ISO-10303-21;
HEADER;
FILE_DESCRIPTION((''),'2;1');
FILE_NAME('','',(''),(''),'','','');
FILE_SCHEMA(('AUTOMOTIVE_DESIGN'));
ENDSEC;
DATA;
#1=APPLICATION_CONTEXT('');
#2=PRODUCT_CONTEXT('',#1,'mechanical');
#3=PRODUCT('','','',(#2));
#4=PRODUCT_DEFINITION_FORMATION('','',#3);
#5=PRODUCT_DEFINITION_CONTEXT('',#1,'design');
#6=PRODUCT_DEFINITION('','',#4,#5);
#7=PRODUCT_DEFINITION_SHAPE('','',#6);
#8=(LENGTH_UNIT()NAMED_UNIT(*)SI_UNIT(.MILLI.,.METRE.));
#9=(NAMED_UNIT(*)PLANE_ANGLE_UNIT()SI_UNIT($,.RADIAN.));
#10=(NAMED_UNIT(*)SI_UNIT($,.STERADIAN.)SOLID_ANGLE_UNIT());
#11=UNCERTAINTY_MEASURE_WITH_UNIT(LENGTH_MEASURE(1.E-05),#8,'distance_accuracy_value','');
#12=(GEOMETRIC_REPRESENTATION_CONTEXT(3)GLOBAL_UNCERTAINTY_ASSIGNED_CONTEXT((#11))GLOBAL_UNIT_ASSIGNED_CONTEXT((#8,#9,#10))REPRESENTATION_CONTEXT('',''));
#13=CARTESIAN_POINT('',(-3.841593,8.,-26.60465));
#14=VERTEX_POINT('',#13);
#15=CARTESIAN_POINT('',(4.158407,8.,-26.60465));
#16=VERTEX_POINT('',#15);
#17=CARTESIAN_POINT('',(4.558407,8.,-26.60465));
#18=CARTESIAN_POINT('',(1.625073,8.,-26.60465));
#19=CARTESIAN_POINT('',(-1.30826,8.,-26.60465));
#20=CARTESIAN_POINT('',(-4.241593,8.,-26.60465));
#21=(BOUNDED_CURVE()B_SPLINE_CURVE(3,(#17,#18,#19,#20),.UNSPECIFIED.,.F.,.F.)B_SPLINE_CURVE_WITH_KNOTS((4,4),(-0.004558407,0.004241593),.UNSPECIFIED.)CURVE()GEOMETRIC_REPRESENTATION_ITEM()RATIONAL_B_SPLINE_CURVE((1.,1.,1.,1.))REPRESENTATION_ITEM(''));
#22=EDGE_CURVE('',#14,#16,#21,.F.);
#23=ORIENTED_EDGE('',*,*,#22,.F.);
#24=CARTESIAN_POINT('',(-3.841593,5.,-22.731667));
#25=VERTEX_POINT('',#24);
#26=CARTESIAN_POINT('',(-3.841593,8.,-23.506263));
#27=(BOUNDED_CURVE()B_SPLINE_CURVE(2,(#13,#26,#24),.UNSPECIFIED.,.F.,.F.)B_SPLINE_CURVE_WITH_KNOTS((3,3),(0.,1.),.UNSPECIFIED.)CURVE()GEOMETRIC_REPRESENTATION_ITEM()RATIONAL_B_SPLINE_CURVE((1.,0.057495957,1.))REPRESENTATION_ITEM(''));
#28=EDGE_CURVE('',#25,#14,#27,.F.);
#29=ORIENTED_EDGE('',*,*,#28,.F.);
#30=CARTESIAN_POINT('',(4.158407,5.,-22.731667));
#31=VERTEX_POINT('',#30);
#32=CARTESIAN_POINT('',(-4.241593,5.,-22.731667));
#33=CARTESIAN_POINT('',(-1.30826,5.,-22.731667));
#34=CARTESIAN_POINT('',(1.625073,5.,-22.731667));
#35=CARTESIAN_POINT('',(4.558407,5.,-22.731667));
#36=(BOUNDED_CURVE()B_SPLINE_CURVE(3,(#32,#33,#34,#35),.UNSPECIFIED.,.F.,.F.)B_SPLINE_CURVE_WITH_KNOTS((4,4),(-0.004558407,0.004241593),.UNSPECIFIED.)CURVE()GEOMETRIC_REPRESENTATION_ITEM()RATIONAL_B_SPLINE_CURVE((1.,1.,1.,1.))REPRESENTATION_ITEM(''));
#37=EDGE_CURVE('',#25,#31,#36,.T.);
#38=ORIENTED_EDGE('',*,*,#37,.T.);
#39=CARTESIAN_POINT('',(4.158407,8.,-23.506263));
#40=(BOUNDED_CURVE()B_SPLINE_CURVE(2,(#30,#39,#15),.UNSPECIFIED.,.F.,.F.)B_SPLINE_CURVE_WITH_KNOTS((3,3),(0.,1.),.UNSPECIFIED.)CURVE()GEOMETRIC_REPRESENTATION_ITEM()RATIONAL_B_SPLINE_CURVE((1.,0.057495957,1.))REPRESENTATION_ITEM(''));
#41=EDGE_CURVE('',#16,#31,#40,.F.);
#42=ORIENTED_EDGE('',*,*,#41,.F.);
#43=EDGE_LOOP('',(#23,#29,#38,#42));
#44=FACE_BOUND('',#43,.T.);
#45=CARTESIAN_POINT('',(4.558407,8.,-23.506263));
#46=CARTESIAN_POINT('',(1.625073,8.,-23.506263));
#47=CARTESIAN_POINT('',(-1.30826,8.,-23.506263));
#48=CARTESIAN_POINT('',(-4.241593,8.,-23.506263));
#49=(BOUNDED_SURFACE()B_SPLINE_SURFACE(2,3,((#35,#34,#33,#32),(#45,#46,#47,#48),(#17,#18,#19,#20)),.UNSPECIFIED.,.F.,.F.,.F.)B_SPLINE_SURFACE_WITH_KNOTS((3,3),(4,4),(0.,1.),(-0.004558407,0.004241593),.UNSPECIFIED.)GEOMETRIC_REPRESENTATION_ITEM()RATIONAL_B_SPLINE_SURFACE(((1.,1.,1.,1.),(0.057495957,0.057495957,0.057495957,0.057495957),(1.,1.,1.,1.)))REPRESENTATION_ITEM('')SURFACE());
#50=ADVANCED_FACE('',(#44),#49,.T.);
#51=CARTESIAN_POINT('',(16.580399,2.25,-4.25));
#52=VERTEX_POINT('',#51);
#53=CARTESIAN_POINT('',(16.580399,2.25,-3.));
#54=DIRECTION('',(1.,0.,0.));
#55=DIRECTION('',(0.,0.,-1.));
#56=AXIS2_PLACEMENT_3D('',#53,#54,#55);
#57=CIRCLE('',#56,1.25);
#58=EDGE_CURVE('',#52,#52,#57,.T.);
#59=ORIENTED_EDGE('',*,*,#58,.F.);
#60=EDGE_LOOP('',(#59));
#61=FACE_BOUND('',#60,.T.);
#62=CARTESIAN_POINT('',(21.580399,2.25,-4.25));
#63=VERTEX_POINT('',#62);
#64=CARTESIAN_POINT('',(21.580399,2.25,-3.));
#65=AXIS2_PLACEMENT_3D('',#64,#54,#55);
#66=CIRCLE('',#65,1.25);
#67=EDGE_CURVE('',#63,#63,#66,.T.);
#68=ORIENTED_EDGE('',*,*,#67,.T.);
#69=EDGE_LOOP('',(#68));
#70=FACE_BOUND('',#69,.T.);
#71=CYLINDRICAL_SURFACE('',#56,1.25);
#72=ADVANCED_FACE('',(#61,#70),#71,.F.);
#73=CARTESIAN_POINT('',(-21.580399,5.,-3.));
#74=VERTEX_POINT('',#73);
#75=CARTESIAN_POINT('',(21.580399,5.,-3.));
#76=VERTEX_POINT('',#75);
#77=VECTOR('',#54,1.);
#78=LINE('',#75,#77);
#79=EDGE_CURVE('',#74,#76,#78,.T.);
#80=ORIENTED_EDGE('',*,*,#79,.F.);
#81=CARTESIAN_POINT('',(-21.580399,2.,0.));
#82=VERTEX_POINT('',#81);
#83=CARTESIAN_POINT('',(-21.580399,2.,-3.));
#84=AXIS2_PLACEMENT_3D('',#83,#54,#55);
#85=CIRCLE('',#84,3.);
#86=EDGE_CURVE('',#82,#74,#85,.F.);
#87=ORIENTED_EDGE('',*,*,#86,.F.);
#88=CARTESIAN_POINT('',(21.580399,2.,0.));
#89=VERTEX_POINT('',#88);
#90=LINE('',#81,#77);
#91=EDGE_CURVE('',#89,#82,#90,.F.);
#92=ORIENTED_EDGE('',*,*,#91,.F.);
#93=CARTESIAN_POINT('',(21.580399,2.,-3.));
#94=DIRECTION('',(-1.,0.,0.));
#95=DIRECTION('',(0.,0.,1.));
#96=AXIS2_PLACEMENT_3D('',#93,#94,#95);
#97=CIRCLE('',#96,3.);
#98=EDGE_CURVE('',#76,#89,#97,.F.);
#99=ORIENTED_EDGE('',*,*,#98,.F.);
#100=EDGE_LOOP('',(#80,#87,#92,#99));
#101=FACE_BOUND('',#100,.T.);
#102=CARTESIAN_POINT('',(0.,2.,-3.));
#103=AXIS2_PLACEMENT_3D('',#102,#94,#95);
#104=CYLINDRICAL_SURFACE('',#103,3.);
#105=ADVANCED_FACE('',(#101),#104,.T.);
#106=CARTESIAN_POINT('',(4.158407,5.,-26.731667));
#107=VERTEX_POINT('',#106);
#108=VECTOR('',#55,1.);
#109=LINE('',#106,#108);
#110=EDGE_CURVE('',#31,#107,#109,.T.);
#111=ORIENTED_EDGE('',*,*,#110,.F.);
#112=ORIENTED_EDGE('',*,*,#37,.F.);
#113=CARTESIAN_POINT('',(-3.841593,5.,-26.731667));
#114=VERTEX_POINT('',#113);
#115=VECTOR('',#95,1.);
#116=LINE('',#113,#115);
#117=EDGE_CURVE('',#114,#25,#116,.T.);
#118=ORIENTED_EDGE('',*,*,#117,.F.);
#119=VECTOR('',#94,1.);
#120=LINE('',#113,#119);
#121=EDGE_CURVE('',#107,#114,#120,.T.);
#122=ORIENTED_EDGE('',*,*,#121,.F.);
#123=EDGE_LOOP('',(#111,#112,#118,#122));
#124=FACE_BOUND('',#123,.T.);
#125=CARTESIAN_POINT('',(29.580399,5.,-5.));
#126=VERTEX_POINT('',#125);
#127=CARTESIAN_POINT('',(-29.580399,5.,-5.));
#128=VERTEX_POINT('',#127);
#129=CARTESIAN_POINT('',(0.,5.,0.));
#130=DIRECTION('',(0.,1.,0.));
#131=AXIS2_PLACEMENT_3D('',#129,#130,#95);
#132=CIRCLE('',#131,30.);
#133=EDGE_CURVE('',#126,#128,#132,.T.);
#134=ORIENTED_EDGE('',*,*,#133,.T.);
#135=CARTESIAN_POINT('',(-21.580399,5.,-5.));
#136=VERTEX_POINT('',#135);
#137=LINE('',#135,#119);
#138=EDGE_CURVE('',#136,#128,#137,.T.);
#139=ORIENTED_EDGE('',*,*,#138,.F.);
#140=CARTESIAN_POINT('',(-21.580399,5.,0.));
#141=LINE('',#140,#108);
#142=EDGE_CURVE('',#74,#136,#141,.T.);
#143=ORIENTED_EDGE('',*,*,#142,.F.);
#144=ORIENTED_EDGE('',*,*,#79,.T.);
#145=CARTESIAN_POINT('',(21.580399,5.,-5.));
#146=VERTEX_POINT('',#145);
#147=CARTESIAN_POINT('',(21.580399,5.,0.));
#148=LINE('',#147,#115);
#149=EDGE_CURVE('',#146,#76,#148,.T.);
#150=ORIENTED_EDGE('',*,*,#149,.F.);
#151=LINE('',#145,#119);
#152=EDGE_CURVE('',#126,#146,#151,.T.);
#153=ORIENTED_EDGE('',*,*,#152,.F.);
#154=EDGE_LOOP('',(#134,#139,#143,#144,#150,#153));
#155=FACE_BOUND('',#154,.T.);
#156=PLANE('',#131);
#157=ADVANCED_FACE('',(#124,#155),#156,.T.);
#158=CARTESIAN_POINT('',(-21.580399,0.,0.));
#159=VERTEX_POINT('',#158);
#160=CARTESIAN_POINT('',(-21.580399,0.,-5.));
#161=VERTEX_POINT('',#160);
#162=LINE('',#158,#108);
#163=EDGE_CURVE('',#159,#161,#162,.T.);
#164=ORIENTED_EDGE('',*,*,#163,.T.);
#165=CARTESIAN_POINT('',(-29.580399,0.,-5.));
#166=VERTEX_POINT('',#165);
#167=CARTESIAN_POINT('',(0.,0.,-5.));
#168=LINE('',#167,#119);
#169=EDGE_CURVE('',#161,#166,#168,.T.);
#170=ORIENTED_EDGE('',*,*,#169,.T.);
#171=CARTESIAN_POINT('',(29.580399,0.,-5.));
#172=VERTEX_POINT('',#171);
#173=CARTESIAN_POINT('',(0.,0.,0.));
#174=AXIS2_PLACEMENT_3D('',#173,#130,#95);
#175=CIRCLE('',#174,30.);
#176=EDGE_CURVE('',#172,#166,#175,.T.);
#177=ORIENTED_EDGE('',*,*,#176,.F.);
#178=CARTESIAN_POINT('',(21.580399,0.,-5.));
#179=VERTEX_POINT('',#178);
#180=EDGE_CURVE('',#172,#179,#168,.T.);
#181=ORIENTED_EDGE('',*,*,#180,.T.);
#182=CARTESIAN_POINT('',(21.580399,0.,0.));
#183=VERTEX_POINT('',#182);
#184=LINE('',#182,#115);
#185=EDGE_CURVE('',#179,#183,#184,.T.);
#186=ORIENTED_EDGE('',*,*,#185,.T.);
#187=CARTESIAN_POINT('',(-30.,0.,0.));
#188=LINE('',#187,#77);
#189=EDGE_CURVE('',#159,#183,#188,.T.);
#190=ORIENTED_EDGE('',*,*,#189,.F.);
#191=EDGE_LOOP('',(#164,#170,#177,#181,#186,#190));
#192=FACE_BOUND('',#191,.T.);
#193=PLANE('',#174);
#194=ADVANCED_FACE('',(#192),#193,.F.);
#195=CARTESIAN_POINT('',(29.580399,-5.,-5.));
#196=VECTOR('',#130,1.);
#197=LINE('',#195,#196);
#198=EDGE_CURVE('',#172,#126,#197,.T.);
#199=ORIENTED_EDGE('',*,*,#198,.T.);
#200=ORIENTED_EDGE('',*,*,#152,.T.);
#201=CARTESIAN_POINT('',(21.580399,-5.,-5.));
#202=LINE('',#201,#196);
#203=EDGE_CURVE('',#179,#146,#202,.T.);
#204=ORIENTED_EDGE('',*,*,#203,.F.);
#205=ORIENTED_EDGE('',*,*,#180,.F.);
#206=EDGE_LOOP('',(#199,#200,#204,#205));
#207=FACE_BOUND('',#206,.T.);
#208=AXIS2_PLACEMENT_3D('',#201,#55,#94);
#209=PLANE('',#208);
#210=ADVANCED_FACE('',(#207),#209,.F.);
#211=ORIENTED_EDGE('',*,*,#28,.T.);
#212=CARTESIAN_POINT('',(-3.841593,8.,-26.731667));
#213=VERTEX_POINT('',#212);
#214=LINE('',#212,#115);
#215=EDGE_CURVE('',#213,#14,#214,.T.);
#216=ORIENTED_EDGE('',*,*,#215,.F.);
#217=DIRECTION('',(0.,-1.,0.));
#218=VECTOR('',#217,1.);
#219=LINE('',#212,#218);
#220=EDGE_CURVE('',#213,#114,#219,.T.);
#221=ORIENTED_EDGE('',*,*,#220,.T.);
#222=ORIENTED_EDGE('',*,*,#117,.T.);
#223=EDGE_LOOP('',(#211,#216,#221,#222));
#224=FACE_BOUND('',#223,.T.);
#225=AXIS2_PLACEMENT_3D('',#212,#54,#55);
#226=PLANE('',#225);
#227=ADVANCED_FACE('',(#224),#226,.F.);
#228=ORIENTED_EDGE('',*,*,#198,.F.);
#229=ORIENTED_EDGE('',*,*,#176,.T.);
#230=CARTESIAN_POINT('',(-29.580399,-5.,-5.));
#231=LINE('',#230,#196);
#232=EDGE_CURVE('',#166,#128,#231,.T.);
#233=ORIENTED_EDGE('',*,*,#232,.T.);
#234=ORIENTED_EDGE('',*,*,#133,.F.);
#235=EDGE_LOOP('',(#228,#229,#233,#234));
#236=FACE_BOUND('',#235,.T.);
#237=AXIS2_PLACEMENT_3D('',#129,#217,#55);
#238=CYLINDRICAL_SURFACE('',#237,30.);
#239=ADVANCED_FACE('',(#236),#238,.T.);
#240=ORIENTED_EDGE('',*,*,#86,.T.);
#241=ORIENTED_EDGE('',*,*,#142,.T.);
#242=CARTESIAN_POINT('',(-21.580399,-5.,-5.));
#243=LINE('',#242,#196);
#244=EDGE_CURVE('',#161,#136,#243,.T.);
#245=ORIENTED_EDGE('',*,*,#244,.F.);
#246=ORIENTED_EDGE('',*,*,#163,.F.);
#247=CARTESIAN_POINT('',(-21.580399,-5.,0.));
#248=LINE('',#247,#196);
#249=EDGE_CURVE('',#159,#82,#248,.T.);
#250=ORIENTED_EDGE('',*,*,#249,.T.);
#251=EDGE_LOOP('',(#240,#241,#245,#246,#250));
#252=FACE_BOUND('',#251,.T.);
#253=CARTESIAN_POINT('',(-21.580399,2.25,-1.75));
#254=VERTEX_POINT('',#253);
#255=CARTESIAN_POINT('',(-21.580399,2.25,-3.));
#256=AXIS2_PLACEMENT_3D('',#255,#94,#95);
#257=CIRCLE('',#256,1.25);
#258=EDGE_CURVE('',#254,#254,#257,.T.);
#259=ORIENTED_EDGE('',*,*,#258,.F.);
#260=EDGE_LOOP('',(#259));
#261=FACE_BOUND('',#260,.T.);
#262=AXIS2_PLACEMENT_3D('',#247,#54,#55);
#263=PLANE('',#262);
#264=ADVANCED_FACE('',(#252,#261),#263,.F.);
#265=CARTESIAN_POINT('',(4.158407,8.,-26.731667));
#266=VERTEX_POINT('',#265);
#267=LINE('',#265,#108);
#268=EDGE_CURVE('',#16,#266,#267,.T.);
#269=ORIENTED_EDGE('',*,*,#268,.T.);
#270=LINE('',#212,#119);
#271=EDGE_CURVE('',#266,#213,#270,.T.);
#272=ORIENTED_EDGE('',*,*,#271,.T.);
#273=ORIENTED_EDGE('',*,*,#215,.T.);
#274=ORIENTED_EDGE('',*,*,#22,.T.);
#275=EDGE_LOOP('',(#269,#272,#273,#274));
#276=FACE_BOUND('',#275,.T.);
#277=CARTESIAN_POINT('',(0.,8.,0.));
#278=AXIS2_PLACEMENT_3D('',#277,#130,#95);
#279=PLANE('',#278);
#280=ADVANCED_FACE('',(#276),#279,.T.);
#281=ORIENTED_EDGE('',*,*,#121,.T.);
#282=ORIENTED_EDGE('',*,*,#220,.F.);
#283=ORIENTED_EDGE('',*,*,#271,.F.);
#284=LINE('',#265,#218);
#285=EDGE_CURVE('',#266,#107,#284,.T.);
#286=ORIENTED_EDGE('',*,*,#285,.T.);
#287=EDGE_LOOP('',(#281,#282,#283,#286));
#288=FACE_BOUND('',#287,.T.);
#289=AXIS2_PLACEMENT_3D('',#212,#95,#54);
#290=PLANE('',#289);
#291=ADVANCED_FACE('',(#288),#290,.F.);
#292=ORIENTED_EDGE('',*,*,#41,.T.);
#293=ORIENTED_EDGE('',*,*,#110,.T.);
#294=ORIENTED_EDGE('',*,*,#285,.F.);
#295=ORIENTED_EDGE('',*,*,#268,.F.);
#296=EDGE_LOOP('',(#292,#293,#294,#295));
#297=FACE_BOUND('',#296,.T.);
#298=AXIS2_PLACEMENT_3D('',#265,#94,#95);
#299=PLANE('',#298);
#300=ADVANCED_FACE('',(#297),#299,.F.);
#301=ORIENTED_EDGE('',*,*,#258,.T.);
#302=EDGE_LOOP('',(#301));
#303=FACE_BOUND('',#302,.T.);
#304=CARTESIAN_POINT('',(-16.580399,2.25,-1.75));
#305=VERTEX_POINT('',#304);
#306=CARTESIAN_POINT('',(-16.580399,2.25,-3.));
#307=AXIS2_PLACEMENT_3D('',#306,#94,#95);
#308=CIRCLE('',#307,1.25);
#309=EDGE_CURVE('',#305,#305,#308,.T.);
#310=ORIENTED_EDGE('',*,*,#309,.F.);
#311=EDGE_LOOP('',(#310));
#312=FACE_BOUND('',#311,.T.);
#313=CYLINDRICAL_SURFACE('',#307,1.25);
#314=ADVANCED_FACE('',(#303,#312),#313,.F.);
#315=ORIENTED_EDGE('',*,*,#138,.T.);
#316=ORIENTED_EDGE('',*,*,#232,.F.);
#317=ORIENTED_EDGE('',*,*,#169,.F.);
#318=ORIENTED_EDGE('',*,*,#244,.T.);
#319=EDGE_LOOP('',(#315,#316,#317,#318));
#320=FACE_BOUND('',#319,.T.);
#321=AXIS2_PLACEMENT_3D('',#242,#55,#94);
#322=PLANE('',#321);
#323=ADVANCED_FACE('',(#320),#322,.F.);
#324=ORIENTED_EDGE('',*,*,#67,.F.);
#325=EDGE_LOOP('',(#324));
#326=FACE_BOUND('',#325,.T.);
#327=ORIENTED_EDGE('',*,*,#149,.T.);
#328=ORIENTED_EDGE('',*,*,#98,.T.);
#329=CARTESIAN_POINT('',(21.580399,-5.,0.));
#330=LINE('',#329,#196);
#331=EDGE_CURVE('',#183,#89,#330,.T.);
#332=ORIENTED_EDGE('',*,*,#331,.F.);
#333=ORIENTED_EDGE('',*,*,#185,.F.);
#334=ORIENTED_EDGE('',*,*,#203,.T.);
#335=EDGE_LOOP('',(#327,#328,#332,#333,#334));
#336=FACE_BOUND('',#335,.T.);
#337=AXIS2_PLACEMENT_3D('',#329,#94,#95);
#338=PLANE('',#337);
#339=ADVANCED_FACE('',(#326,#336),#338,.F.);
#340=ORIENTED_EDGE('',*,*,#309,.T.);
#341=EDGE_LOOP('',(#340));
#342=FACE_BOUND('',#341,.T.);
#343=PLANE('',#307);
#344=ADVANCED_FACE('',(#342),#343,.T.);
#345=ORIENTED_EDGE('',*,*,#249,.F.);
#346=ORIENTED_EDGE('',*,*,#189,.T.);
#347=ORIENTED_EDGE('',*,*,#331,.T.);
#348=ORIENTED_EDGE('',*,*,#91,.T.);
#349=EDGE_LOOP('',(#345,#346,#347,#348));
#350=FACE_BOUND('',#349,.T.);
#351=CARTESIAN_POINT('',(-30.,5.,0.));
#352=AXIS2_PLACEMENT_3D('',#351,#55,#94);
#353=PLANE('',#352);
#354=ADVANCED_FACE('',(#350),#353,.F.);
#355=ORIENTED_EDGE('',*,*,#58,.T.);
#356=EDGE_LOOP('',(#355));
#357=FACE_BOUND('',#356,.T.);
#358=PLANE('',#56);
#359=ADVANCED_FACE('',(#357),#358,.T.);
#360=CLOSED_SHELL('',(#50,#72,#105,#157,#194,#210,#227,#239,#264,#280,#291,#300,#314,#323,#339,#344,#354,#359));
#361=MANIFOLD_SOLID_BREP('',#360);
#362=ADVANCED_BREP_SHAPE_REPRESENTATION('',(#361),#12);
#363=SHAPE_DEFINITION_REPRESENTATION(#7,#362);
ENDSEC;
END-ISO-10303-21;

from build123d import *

# Parameters (mm, degrees)
BOSS_EXTRUDE1_DEPTH = 5
SKETCH3_W           = 8
SKETCH3_H           = 4
BOSS_EXTRUDE2_DEPTH = 3
FILLET1_START       = -3.841593316
FILLET1_DEPTH       = 8
CUT_EXTRUDE1_START  = -10
CUT_EXTRUDE1_DEPTH  = 10
FILLET2_R           = 3
SKETCH6_R           = 1.25
CUT_EXTRUDE2_DEPTH  = 5
CUT_EXTRUDE3_START  = -5
SKETCH7_R           = 1.25
CUT_EXTRUDE3_DEPTH  = 5


with BuildPart() as part:
    # Sketch1 → Boss-Extrude1 (new body)
    with BuildSketch(Plane(origin=(0, 0, 0), x_dir=(1, 0, 0), z_dir=(0, 1, 0))):
        with BuildLine():
            Line((-30, 0), (30, 0))
            ThreePointArc((30, 0), (0, 30), (-30, 0))
        make_face()
    extrude(amount=BOSS_EXTRUDE1_DEPTH)

    # Sketch3 → Boss-Extrude2 (add)
    with BuildSketch(Plane(origin=(0, 5, 0), x_dir=(1, 0, 0), z_dir=(0, 1, 0))):
        with Locations((0.158406684, 24.731666579)):
            Rectangle(SKETCH3_W, SKETCH3_H)
    extrude(amount=BOSS_EXTRUDE2_DEPTH)

    # Fillet1: read off the stored shape, not the designer's step
    # Fillet1 outline → Fillet1 (cut)
    with BuildSketch(Plane.YZ.offset(FILLET1_START)):
        with BuildLine():
            Line((8, -22.731666579), (5, -22.731666579))
            add(Edge.make_bspline(
                [(5, -22.731666579), (8, -23.506263249), (8, -26.604649926)],
                knots=[0, 0, 0, 1, 1, 1], degree=2, weights=[1, 0.057495957, 1]))
            Line((8, -26.604649926), (8, -22.731666579))
        make_face()
    extrude(amount=FILLET1_DEPTH, mode=Mode.SUBTRACT)

    # Sketch5 → Cut-Extrude1 (cut)
    with BuildSketch(Plane(origin=(0, 5, 0), x_dir=(1, 0, 0), z_dir=(0, 1, 0)).offset(CUT_EXTRUDE1_START)):
        with BuildLine():
            Line((-21.580398915, 0), (-21.580398915, 5))
            Line((-21.580398915, 5), (-29.580398915, 5))
            ThreePointArc((-29.580398915, 5), (-29.894915684, 2.508787808), (-30, 0))
            Line((-30, 0), (-21.580398915, 0))
        make_face()
        with BuildLine():
            Line((21.580398915, 5), (29.580398915, 5))
            ThreePointArc((29.580398915, 5), (29.894915684, 2.508787808), (30, 0))
            Line((30, 0), (21.580398915, 0))
            Line((21.580398915, 0), (21.580398915, 5))
        make_face()
    extrude(amount=CUT_EXTRUDE1_DEPTH, mode=Mode.SUBTRACT)

    # Fillet2
    fillet2_edges = [part.edges().sort_by_distance(p)[0] for p in [
        (0, 5, 0),
    ]]
    fillet(fillet2_edges, radius=FILLET2_R)

    # Sketch6 → Cut-Extrude2 (cut)
    with BuildSketch(Plane(origin=(21.580398915, 0, 0), x_dir=(0, 0, -1), z_dir=(1, 0, 0))):
        with Locations((3, 2.25)):
            Circle(SKETCH6_R)
    extrude(amount=-CUT_EXTRUDE2_DEPTH, mode=Mode.SUBTRACT)

    # Sketch7 → Cut-Extrude3 (cut)
    with BuildSketch(Plane.ZY.offset(21.580398915).offset(CUT_EXTRUDE3_START)):
        with Locations(Location((-3, 2.25, 0), (0, 0, 180))):
            Circle(SKETCH7_R)
    extrude(amount=CUT_EXTRUDE3_DEPTH, mode=Mode.SUBTRACT)


solid = part.part
